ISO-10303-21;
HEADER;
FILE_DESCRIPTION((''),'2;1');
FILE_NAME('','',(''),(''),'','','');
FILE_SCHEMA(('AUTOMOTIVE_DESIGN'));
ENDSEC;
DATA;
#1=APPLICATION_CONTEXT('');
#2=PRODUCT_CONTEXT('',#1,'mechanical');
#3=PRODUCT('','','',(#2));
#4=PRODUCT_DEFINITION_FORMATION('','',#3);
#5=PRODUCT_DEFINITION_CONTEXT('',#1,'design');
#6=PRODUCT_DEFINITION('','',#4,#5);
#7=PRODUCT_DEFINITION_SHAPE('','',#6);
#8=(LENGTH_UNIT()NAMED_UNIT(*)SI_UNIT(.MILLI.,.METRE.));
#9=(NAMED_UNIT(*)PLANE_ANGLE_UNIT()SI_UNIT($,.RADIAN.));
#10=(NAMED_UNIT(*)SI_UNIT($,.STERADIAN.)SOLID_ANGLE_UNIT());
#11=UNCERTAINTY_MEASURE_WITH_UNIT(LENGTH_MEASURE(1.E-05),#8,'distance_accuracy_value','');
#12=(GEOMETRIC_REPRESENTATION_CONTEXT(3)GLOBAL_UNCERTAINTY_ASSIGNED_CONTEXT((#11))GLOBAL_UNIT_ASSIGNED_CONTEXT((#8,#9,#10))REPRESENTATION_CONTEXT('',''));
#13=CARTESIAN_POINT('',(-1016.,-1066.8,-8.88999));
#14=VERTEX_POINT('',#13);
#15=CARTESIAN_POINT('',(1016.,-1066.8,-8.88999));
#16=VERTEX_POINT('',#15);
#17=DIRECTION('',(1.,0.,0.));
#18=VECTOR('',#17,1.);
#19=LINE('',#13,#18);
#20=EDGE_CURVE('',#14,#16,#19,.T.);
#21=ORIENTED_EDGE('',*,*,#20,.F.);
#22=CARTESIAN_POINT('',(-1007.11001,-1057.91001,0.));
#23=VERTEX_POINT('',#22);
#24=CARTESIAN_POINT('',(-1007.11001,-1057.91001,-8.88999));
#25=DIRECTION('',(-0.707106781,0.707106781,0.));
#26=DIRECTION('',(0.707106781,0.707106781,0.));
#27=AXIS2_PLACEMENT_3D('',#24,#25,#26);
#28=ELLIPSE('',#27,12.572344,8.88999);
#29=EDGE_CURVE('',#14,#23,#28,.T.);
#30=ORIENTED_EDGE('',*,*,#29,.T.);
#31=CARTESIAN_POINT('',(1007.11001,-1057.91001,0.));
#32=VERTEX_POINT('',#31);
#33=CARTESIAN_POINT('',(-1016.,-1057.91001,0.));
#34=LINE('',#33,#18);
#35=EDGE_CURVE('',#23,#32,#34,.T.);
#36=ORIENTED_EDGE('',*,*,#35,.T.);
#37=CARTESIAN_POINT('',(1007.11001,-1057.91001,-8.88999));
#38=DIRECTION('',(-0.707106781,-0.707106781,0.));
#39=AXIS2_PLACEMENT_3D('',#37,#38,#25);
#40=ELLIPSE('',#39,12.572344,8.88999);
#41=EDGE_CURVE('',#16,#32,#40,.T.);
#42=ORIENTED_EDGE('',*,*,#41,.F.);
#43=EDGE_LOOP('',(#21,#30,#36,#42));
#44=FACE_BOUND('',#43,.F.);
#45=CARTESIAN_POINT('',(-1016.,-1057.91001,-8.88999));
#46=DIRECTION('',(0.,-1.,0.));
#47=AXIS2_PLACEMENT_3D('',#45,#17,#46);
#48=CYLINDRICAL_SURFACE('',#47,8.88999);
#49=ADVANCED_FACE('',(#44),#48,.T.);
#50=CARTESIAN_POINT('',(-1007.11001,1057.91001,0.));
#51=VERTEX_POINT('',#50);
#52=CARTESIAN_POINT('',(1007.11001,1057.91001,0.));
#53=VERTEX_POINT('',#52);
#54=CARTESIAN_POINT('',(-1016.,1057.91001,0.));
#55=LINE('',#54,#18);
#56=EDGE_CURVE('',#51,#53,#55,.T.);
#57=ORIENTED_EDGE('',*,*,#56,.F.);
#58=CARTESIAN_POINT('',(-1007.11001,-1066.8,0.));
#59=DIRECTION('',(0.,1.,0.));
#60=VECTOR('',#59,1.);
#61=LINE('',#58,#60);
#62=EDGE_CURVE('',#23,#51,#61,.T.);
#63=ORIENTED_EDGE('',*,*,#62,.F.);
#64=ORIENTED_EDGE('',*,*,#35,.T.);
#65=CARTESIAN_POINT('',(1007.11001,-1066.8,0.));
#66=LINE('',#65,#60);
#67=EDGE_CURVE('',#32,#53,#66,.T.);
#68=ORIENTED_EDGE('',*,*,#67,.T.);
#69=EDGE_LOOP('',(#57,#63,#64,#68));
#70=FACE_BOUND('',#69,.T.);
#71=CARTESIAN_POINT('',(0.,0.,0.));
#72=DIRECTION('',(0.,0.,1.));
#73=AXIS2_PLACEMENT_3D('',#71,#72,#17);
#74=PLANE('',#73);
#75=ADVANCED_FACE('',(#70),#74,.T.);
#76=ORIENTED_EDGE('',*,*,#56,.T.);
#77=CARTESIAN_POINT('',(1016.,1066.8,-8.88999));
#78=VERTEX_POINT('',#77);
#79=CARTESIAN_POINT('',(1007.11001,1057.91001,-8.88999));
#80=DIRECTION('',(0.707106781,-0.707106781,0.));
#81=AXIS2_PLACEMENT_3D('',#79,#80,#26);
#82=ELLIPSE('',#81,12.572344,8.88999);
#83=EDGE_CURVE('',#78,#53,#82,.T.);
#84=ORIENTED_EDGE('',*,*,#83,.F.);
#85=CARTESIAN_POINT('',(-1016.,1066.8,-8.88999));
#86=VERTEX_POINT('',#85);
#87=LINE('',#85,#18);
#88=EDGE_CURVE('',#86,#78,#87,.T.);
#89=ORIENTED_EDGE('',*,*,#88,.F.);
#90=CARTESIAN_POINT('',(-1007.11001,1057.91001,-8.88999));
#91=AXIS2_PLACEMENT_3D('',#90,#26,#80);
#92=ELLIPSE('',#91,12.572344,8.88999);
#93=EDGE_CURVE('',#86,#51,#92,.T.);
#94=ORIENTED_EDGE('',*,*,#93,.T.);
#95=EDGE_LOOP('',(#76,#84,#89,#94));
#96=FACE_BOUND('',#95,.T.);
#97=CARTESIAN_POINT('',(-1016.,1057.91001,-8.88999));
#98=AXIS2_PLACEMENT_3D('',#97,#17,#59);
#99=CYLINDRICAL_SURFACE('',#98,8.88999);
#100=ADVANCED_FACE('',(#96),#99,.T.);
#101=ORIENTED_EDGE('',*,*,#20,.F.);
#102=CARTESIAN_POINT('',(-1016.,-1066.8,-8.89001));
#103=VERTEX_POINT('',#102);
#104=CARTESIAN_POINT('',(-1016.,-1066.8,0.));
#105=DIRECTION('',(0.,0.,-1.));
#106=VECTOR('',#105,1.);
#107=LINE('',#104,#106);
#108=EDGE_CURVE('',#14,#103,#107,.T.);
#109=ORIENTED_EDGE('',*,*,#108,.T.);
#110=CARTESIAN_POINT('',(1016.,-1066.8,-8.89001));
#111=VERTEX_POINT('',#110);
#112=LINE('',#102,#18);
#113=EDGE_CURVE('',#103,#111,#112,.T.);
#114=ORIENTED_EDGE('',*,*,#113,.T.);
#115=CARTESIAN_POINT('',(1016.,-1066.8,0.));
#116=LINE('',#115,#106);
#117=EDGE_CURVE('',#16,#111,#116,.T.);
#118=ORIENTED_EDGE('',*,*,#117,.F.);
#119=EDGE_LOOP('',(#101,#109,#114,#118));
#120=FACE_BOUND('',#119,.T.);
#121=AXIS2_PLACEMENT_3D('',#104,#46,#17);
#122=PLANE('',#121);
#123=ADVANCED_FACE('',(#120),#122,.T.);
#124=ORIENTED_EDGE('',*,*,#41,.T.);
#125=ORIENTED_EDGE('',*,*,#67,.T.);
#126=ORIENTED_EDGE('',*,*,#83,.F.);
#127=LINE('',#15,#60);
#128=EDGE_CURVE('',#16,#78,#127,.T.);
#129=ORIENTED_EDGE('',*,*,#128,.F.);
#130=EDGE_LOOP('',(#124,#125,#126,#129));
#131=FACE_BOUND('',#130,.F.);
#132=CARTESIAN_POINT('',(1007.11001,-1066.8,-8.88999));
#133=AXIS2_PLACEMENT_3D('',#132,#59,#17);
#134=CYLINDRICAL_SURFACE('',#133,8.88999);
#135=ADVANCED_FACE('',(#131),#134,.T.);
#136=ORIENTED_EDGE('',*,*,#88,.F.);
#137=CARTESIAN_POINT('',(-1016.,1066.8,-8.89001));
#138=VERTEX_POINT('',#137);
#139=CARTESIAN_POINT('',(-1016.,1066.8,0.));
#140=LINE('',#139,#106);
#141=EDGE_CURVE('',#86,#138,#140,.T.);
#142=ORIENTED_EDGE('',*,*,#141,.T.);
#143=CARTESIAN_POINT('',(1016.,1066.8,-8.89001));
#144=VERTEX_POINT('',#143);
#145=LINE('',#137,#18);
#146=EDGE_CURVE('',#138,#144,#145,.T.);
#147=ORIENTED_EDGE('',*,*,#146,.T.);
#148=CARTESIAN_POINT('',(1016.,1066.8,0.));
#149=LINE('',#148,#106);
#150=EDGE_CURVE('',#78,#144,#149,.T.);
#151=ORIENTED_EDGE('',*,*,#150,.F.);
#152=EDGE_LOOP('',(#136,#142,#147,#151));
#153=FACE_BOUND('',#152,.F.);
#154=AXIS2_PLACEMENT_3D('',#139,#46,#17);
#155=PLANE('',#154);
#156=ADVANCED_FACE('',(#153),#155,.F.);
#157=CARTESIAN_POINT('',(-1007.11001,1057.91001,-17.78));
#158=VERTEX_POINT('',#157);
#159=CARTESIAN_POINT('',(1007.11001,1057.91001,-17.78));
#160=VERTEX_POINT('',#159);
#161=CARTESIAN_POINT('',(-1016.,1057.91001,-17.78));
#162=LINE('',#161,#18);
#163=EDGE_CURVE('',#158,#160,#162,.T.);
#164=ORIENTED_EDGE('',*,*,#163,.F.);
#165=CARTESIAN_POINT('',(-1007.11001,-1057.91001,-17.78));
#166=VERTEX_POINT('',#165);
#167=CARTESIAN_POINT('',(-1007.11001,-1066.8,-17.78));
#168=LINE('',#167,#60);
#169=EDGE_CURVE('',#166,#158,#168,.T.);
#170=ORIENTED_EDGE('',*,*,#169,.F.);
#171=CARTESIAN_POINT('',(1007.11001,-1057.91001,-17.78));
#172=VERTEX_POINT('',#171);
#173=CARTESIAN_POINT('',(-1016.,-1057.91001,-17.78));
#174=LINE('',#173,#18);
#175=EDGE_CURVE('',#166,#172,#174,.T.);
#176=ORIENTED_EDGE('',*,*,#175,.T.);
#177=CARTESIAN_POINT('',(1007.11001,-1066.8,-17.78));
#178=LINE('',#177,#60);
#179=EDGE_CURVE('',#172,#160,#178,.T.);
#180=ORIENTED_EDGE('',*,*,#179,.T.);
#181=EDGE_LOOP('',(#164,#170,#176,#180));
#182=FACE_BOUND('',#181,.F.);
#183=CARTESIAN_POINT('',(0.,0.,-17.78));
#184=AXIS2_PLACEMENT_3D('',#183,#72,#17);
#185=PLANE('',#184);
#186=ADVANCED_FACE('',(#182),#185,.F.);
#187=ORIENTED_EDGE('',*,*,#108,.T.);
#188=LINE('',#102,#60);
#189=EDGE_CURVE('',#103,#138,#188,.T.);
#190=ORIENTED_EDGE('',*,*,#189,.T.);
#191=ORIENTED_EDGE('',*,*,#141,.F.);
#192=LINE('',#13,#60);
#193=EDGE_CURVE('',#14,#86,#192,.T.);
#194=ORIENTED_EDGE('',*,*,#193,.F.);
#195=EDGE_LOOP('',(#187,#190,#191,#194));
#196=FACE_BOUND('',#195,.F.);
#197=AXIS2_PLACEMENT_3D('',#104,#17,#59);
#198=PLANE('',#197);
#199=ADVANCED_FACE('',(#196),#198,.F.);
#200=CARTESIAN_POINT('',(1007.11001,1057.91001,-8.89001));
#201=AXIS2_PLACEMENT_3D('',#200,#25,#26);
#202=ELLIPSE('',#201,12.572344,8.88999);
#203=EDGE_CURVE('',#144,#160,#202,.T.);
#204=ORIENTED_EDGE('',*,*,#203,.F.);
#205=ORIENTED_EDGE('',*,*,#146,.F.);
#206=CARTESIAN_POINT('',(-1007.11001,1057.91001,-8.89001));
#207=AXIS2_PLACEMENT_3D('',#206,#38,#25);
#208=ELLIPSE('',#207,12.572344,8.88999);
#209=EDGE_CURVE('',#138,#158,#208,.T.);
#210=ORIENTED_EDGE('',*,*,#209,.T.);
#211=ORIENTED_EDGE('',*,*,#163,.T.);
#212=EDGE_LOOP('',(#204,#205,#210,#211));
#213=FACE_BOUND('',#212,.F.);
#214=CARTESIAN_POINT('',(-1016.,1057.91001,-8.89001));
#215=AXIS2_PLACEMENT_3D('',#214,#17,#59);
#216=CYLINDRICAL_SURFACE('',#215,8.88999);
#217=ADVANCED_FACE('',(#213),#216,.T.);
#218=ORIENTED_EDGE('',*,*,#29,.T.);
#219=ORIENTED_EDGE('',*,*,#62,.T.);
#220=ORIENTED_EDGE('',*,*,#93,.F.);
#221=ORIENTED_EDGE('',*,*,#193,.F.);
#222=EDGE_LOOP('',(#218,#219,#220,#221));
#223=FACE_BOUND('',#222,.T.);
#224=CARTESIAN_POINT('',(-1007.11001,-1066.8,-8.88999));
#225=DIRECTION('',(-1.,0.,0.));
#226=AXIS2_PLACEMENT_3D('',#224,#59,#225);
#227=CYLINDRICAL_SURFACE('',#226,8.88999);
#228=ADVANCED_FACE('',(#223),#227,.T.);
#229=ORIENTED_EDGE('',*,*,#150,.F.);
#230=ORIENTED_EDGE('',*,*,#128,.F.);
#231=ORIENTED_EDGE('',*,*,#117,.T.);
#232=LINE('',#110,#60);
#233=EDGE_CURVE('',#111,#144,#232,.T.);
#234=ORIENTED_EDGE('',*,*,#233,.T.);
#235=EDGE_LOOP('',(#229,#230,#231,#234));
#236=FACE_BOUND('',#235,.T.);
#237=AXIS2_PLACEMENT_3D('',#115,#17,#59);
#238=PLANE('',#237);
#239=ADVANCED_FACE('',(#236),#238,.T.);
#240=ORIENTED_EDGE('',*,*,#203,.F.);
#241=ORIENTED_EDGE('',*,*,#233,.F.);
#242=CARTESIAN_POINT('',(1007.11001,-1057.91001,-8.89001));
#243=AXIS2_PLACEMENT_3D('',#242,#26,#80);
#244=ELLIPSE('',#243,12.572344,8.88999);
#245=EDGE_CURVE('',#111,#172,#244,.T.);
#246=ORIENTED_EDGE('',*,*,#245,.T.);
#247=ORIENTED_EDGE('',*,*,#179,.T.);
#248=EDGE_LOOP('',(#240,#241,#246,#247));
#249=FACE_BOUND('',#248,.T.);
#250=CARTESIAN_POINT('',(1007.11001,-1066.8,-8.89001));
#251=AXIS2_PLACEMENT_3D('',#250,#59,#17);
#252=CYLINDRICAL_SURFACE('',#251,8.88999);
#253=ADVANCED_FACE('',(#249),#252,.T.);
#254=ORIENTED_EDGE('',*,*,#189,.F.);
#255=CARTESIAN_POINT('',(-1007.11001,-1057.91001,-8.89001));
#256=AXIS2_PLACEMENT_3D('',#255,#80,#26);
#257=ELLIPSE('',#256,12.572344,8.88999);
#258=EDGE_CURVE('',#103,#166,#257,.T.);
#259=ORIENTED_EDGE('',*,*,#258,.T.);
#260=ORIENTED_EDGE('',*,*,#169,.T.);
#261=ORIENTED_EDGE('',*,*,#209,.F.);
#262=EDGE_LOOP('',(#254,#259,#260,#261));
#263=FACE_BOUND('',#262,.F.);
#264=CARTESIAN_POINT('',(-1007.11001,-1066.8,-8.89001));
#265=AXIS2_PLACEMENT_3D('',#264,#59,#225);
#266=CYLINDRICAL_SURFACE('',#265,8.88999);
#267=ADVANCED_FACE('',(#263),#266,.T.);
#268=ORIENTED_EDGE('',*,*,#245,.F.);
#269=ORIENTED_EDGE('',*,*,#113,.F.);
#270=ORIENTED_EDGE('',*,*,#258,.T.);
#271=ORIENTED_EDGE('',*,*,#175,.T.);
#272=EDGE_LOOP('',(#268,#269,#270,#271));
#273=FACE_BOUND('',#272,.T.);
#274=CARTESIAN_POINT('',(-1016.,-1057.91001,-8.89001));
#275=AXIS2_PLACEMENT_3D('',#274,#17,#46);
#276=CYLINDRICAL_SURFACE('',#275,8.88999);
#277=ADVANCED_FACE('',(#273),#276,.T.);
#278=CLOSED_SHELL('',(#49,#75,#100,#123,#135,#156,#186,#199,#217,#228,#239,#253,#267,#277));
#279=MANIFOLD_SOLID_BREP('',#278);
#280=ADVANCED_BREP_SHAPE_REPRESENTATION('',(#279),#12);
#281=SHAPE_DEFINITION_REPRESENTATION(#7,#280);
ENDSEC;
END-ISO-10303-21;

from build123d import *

# Parameters (mm, degrees)
F0_W     = 2032
F0_H     = 2133.6
F1_DEPTH = 17.78
F2_R     = 8.88999


# Not quite as in the source:
# - a fillet or chamfer is up to 0.001 mm smaller than in the source, because OpenCascade refuses the exact size


with BuildPart() as f1:
    # F0 (on Top) → F1 (new body)
    with BuildSketch(Plane.XY):
        Rectangle(F0_W, F0_H)
    extrude(amount=-F1_DEPTH)

    # F2 (radius 8.89 in the source; OpenCascade refuses exactly that, so slightly less here)
    f2_edges = [f1.edges().sort_by_distance(p)[0] for p in [
        (1016, 0, 0),
        (0, 1066.8, 0),
        (-1016, 0, 0),
        (0, -1066.8, 0),
        (0, -1066.8, -17.78),
        (-1016, 0, -17.78),
        (0, 1066.8, -17.78),
        (1016, 0, -17.78),
    ]]
    fillet(f2_edges, radius=F2_R)


solid = f1.part
